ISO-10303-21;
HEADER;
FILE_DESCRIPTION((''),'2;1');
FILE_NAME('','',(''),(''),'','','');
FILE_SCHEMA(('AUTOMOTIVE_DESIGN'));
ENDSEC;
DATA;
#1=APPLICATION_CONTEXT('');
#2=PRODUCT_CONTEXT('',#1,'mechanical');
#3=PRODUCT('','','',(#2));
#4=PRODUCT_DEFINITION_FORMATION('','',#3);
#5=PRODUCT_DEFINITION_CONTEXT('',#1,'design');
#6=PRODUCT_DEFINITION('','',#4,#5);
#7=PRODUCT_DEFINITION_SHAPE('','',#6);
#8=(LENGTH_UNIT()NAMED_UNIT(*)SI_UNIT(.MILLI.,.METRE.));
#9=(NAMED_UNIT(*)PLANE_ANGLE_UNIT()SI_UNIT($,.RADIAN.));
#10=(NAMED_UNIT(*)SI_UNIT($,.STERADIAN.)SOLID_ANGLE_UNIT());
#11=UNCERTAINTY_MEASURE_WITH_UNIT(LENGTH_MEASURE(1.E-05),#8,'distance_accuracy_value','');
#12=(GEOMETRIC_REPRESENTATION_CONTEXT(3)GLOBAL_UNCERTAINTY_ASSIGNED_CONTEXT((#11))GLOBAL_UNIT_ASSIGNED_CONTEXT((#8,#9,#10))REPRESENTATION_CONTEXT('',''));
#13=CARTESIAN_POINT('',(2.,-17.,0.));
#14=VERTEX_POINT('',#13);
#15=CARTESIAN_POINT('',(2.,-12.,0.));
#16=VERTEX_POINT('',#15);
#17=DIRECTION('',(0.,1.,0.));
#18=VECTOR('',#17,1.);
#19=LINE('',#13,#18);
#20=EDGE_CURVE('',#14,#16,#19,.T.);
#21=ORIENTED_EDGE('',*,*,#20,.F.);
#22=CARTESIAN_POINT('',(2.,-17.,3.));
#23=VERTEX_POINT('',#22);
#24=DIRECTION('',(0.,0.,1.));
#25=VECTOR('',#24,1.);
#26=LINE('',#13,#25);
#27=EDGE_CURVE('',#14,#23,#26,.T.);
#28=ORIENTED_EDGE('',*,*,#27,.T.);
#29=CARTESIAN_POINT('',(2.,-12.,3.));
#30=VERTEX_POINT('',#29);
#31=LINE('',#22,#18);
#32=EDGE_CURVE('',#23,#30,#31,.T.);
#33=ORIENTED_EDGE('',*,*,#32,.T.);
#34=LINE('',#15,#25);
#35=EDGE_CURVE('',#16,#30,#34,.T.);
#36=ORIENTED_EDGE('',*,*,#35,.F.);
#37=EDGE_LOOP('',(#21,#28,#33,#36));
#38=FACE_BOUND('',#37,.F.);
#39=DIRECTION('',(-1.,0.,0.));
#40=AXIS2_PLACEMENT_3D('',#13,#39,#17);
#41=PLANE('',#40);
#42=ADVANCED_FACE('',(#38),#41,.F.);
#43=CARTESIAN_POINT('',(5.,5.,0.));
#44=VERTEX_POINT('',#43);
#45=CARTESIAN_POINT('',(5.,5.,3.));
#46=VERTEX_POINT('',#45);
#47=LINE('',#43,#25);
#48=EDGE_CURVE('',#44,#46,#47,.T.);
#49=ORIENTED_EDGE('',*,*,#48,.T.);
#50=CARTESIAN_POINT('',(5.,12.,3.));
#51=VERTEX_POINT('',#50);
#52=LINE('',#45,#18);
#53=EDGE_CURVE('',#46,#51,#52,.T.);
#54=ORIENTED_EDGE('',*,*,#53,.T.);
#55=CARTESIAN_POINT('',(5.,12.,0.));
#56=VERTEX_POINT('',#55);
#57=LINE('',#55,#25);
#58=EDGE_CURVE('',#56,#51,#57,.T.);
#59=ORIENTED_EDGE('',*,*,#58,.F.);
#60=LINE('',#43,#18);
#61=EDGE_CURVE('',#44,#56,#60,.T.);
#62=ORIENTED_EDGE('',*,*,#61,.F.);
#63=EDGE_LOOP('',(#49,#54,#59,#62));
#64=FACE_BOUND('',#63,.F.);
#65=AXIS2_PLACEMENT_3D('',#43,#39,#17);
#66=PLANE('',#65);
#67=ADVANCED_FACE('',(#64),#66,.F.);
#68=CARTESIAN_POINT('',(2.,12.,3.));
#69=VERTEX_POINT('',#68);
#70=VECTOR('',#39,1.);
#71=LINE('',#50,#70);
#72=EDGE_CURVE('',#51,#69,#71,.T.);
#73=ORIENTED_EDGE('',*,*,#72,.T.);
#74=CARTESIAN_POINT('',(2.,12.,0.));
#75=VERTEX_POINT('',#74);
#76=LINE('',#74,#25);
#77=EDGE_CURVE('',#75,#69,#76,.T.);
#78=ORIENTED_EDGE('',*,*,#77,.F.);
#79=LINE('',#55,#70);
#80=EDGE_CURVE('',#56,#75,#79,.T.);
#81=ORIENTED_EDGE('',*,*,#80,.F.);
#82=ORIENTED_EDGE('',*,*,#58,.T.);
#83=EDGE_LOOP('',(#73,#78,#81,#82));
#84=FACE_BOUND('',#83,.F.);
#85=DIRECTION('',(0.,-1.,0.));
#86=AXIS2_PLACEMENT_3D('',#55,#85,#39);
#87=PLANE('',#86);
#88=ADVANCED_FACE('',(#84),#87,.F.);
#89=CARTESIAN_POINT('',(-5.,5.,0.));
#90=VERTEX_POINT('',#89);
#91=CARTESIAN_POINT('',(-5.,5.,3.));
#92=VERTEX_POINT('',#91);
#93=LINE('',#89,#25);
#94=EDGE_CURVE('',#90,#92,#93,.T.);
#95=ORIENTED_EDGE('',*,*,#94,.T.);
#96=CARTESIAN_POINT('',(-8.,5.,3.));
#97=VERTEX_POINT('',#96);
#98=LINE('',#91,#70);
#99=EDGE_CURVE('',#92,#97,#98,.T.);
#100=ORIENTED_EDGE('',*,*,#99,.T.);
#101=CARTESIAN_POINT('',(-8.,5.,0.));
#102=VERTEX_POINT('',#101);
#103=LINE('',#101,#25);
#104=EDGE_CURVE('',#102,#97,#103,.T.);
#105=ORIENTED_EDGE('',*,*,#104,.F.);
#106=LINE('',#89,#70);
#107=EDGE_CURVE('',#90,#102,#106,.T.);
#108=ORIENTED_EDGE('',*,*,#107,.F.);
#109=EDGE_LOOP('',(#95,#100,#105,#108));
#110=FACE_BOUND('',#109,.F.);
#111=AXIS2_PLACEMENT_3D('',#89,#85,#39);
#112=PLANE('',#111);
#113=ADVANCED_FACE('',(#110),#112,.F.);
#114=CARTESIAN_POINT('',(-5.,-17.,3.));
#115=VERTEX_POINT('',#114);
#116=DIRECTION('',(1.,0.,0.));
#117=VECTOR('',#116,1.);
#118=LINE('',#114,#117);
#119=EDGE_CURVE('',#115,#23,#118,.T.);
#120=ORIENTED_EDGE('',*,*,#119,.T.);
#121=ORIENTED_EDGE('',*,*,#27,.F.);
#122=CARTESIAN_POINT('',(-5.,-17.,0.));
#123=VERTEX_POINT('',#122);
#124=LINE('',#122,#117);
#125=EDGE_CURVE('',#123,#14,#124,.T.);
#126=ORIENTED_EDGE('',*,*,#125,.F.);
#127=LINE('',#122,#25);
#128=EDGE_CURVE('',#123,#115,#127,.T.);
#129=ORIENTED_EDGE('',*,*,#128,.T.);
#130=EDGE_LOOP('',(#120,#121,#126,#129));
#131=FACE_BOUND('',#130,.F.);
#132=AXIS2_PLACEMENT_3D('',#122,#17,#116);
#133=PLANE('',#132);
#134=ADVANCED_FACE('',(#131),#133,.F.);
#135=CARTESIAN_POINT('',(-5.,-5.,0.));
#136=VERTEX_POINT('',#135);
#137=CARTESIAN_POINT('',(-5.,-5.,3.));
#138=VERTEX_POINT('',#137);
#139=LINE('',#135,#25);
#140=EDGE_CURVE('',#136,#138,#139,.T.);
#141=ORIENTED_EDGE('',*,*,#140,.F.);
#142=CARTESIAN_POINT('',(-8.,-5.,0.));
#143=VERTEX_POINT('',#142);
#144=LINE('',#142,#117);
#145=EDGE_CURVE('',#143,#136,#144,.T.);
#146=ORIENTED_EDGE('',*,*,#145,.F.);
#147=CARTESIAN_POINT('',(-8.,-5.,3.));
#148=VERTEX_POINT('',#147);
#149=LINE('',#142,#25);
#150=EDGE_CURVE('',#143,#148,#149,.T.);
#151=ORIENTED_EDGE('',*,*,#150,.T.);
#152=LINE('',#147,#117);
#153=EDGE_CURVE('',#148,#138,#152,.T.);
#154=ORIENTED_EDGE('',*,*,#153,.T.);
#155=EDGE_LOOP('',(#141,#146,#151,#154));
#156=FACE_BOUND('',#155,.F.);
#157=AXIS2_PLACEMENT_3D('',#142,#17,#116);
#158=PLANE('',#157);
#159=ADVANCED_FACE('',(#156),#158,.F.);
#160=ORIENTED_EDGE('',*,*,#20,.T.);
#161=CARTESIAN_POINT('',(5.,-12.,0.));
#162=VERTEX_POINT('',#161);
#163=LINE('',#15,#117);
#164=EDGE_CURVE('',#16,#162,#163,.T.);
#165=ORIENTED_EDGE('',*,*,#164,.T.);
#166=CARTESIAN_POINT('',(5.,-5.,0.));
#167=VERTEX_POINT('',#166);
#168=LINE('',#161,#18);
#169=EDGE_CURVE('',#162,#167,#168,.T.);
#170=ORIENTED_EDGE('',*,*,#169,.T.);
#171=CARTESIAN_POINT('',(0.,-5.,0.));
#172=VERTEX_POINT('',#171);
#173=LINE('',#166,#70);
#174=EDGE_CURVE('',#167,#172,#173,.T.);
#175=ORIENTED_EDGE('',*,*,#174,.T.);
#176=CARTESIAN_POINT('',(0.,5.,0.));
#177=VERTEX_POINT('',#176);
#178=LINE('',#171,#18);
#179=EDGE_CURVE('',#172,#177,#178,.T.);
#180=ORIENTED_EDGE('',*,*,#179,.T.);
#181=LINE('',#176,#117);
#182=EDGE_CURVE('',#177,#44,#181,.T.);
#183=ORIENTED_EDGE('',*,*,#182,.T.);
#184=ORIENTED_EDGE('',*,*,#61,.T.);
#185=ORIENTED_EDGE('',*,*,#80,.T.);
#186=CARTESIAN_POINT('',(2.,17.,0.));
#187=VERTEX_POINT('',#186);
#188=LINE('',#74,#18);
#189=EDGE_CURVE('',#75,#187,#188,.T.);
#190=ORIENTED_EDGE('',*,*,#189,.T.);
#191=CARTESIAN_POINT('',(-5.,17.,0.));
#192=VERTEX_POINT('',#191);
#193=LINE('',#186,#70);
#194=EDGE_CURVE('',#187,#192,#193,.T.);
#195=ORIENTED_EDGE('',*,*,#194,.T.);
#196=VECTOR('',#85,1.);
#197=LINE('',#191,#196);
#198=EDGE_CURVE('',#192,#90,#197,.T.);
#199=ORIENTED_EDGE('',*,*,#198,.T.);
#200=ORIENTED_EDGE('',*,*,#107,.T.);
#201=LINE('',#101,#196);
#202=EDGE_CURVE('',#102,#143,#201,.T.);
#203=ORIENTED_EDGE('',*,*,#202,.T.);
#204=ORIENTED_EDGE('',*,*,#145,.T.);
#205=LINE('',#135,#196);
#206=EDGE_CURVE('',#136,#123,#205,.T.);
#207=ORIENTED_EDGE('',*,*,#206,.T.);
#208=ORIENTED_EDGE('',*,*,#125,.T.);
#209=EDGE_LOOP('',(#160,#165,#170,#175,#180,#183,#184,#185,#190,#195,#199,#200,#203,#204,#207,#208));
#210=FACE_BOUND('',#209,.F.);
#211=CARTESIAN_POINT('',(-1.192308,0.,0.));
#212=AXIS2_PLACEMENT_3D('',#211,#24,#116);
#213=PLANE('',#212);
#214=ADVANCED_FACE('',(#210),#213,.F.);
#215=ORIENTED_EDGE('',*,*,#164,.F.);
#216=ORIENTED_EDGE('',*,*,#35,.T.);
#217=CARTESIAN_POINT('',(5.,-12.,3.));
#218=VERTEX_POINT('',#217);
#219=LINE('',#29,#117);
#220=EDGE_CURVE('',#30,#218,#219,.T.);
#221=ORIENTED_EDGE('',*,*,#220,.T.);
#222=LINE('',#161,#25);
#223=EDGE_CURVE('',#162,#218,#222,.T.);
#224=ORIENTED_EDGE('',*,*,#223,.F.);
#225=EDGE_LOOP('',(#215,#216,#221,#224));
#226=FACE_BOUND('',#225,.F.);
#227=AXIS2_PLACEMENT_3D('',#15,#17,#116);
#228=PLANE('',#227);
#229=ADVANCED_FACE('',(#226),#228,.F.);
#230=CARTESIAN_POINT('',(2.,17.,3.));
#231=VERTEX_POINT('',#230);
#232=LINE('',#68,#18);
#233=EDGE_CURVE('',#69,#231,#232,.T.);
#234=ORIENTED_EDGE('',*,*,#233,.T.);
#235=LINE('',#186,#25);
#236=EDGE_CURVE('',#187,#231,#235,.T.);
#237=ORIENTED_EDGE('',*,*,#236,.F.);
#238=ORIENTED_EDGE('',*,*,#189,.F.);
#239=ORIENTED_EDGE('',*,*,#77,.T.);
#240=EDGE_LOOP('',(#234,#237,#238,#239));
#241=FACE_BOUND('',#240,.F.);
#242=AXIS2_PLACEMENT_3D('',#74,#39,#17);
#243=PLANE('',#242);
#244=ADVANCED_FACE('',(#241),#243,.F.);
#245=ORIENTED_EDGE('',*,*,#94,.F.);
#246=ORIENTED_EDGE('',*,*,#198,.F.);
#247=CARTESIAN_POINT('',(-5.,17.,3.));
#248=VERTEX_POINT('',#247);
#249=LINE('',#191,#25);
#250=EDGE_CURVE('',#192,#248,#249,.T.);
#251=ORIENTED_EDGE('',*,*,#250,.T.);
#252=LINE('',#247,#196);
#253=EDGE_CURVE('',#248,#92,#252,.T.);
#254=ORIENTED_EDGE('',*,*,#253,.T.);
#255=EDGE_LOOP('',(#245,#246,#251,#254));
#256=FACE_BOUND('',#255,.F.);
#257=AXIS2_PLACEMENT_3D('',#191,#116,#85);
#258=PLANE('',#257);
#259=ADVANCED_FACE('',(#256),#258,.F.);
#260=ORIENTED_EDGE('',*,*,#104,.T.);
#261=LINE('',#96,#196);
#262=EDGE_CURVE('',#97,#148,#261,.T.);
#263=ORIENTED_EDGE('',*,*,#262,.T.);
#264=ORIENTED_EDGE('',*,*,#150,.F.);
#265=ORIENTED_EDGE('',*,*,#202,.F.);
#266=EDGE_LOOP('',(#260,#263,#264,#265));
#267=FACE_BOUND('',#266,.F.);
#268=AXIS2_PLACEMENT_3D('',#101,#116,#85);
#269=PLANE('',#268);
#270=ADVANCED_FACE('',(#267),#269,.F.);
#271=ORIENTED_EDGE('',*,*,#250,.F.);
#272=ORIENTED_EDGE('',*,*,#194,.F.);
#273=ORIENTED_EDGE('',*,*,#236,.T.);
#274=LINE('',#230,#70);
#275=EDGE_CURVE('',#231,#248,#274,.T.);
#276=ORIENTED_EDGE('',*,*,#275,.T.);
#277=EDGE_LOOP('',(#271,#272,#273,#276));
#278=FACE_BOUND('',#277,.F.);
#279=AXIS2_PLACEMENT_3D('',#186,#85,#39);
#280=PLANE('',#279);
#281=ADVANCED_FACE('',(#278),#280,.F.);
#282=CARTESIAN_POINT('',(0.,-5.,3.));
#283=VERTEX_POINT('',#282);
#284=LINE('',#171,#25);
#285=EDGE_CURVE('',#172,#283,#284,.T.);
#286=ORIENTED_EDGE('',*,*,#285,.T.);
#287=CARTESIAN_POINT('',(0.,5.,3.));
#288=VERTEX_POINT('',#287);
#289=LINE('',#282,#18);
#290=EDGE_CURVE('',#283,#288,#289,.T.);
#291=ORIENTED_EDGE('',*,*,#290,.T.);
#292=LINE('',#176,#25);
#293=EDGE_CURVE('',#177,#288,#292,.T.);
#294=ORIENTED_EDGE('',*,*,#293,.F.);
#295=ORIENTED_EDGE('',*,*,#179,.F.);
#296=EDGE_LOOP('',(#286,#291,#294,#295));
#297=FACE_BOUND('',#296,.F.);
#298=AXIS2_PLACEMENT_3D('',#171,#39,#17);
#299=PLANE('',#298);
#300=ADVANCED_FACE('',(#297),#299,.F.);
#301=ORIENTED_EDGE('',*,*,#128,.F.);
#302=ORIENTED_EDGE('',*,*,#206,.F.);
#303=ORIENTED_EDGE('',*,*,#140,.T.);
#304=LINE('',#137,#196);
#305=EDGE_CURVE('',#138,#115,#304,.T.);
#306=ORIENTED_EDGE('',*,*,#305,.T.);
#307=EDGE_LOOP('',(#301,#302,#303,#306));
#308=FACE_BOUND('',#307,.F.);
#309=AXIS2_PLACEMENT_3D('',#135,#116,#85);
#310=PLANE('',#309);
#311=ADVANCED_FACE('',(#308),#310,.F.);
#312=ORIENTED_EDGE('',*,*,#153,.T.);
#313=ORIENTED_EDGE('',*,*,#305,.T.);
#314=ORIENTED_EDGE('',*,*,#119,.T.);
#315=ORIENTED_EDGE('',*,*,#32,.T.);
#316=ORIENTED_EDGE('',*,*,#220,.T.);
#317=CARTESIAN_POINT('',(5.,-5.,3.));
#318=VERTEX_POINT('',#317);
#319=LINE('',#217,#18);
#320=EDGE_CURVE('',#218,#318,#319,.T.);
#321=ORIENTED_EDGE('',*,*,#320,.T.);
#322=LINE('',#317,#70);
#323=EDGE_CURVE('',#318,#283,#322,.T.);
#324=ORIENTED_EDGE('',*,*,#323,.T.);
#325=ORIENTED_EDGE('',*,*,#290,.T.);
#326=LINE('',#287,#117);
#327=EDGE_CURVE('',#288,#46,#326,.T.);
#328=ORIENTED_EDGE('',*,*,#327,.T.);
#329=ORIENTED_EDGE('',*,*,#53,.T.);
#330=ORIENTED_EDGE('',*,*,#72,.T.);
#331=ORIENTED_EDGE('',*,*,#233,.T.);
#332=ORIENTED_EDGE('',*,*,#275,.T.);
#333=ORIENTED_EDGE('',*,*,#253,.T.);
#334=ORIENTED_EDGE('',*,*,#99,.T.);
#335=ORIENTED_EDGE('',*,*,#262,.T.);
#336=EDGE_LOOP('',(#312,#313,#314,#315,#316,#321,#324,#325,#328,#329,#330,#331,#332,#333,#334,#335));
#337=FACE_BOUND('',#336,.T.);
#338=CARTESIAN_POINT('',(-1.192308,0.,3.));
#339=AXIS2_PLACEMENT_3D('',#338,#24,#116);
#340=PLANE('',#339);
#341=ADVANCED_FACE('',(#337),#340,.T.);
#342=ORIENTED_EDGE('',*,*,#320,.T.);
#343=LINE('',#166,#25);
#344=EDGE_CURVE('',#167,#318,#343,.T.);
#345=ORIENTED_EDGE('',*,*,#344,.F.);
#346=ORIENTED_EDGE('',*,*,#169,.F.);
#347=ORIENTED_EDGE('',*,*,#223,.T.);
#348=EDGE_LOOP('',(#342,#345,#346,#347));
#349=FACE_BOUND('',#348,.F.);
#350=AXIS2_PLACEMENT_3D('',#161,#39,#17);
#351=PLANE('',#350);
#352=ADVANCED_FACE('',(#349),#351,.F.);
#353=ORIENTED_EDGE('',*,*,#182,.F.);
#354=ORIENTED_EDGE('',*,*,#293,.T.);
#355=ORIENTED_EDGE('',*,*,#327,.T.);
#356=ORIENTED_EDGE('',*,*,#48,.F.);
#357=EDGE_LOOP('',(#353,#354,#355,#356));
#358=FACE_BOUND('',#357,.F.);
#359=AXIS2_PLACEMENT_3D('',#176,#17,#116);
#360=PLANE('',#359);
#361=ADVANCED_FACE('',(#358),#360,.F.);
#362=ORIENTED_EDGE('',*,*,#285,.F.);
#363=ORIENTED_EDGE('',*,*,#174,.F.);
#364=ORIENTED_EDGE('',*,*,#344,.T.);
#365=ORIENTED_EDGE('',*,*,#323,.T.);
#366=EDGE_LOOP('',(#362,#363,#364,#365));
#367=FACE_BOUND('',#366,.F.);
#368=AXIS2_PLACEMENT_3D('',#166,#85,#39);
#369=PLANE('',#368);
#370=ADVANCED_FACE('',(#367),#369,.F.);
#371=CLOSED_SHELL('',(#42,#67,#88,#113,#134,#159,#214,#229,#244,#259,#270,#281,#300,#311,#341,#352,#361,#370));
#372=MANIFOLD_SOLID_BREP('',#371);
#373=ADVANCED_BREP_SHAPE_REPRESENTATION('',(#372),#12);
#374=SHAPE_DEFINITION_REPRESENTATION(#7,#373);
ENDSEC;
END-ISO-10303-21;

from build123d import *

# Parameters (mm, degrees)
F1_DEPTH = 3


# Not quite as in the source:
# - a feature names something its author has since deleted; it is built from what else it names


with BuildPart() as f1:
    # F0 (on Top) → F1 (new body)
    with BuildSketch(Plane.XY):
        Polygon((-8, -5), (-5, -5), (-5, -17), (2, -17), (2, -12), (5, -12), (5, -5), (0, -5), (0, 5), (5, 5), (5, 12), (2, 12), (2, 17), (-5, 17), (-5, 5), (-8, 5), align=None)
    extrude(amount=F1_DEPTH)


solid = f1.part
